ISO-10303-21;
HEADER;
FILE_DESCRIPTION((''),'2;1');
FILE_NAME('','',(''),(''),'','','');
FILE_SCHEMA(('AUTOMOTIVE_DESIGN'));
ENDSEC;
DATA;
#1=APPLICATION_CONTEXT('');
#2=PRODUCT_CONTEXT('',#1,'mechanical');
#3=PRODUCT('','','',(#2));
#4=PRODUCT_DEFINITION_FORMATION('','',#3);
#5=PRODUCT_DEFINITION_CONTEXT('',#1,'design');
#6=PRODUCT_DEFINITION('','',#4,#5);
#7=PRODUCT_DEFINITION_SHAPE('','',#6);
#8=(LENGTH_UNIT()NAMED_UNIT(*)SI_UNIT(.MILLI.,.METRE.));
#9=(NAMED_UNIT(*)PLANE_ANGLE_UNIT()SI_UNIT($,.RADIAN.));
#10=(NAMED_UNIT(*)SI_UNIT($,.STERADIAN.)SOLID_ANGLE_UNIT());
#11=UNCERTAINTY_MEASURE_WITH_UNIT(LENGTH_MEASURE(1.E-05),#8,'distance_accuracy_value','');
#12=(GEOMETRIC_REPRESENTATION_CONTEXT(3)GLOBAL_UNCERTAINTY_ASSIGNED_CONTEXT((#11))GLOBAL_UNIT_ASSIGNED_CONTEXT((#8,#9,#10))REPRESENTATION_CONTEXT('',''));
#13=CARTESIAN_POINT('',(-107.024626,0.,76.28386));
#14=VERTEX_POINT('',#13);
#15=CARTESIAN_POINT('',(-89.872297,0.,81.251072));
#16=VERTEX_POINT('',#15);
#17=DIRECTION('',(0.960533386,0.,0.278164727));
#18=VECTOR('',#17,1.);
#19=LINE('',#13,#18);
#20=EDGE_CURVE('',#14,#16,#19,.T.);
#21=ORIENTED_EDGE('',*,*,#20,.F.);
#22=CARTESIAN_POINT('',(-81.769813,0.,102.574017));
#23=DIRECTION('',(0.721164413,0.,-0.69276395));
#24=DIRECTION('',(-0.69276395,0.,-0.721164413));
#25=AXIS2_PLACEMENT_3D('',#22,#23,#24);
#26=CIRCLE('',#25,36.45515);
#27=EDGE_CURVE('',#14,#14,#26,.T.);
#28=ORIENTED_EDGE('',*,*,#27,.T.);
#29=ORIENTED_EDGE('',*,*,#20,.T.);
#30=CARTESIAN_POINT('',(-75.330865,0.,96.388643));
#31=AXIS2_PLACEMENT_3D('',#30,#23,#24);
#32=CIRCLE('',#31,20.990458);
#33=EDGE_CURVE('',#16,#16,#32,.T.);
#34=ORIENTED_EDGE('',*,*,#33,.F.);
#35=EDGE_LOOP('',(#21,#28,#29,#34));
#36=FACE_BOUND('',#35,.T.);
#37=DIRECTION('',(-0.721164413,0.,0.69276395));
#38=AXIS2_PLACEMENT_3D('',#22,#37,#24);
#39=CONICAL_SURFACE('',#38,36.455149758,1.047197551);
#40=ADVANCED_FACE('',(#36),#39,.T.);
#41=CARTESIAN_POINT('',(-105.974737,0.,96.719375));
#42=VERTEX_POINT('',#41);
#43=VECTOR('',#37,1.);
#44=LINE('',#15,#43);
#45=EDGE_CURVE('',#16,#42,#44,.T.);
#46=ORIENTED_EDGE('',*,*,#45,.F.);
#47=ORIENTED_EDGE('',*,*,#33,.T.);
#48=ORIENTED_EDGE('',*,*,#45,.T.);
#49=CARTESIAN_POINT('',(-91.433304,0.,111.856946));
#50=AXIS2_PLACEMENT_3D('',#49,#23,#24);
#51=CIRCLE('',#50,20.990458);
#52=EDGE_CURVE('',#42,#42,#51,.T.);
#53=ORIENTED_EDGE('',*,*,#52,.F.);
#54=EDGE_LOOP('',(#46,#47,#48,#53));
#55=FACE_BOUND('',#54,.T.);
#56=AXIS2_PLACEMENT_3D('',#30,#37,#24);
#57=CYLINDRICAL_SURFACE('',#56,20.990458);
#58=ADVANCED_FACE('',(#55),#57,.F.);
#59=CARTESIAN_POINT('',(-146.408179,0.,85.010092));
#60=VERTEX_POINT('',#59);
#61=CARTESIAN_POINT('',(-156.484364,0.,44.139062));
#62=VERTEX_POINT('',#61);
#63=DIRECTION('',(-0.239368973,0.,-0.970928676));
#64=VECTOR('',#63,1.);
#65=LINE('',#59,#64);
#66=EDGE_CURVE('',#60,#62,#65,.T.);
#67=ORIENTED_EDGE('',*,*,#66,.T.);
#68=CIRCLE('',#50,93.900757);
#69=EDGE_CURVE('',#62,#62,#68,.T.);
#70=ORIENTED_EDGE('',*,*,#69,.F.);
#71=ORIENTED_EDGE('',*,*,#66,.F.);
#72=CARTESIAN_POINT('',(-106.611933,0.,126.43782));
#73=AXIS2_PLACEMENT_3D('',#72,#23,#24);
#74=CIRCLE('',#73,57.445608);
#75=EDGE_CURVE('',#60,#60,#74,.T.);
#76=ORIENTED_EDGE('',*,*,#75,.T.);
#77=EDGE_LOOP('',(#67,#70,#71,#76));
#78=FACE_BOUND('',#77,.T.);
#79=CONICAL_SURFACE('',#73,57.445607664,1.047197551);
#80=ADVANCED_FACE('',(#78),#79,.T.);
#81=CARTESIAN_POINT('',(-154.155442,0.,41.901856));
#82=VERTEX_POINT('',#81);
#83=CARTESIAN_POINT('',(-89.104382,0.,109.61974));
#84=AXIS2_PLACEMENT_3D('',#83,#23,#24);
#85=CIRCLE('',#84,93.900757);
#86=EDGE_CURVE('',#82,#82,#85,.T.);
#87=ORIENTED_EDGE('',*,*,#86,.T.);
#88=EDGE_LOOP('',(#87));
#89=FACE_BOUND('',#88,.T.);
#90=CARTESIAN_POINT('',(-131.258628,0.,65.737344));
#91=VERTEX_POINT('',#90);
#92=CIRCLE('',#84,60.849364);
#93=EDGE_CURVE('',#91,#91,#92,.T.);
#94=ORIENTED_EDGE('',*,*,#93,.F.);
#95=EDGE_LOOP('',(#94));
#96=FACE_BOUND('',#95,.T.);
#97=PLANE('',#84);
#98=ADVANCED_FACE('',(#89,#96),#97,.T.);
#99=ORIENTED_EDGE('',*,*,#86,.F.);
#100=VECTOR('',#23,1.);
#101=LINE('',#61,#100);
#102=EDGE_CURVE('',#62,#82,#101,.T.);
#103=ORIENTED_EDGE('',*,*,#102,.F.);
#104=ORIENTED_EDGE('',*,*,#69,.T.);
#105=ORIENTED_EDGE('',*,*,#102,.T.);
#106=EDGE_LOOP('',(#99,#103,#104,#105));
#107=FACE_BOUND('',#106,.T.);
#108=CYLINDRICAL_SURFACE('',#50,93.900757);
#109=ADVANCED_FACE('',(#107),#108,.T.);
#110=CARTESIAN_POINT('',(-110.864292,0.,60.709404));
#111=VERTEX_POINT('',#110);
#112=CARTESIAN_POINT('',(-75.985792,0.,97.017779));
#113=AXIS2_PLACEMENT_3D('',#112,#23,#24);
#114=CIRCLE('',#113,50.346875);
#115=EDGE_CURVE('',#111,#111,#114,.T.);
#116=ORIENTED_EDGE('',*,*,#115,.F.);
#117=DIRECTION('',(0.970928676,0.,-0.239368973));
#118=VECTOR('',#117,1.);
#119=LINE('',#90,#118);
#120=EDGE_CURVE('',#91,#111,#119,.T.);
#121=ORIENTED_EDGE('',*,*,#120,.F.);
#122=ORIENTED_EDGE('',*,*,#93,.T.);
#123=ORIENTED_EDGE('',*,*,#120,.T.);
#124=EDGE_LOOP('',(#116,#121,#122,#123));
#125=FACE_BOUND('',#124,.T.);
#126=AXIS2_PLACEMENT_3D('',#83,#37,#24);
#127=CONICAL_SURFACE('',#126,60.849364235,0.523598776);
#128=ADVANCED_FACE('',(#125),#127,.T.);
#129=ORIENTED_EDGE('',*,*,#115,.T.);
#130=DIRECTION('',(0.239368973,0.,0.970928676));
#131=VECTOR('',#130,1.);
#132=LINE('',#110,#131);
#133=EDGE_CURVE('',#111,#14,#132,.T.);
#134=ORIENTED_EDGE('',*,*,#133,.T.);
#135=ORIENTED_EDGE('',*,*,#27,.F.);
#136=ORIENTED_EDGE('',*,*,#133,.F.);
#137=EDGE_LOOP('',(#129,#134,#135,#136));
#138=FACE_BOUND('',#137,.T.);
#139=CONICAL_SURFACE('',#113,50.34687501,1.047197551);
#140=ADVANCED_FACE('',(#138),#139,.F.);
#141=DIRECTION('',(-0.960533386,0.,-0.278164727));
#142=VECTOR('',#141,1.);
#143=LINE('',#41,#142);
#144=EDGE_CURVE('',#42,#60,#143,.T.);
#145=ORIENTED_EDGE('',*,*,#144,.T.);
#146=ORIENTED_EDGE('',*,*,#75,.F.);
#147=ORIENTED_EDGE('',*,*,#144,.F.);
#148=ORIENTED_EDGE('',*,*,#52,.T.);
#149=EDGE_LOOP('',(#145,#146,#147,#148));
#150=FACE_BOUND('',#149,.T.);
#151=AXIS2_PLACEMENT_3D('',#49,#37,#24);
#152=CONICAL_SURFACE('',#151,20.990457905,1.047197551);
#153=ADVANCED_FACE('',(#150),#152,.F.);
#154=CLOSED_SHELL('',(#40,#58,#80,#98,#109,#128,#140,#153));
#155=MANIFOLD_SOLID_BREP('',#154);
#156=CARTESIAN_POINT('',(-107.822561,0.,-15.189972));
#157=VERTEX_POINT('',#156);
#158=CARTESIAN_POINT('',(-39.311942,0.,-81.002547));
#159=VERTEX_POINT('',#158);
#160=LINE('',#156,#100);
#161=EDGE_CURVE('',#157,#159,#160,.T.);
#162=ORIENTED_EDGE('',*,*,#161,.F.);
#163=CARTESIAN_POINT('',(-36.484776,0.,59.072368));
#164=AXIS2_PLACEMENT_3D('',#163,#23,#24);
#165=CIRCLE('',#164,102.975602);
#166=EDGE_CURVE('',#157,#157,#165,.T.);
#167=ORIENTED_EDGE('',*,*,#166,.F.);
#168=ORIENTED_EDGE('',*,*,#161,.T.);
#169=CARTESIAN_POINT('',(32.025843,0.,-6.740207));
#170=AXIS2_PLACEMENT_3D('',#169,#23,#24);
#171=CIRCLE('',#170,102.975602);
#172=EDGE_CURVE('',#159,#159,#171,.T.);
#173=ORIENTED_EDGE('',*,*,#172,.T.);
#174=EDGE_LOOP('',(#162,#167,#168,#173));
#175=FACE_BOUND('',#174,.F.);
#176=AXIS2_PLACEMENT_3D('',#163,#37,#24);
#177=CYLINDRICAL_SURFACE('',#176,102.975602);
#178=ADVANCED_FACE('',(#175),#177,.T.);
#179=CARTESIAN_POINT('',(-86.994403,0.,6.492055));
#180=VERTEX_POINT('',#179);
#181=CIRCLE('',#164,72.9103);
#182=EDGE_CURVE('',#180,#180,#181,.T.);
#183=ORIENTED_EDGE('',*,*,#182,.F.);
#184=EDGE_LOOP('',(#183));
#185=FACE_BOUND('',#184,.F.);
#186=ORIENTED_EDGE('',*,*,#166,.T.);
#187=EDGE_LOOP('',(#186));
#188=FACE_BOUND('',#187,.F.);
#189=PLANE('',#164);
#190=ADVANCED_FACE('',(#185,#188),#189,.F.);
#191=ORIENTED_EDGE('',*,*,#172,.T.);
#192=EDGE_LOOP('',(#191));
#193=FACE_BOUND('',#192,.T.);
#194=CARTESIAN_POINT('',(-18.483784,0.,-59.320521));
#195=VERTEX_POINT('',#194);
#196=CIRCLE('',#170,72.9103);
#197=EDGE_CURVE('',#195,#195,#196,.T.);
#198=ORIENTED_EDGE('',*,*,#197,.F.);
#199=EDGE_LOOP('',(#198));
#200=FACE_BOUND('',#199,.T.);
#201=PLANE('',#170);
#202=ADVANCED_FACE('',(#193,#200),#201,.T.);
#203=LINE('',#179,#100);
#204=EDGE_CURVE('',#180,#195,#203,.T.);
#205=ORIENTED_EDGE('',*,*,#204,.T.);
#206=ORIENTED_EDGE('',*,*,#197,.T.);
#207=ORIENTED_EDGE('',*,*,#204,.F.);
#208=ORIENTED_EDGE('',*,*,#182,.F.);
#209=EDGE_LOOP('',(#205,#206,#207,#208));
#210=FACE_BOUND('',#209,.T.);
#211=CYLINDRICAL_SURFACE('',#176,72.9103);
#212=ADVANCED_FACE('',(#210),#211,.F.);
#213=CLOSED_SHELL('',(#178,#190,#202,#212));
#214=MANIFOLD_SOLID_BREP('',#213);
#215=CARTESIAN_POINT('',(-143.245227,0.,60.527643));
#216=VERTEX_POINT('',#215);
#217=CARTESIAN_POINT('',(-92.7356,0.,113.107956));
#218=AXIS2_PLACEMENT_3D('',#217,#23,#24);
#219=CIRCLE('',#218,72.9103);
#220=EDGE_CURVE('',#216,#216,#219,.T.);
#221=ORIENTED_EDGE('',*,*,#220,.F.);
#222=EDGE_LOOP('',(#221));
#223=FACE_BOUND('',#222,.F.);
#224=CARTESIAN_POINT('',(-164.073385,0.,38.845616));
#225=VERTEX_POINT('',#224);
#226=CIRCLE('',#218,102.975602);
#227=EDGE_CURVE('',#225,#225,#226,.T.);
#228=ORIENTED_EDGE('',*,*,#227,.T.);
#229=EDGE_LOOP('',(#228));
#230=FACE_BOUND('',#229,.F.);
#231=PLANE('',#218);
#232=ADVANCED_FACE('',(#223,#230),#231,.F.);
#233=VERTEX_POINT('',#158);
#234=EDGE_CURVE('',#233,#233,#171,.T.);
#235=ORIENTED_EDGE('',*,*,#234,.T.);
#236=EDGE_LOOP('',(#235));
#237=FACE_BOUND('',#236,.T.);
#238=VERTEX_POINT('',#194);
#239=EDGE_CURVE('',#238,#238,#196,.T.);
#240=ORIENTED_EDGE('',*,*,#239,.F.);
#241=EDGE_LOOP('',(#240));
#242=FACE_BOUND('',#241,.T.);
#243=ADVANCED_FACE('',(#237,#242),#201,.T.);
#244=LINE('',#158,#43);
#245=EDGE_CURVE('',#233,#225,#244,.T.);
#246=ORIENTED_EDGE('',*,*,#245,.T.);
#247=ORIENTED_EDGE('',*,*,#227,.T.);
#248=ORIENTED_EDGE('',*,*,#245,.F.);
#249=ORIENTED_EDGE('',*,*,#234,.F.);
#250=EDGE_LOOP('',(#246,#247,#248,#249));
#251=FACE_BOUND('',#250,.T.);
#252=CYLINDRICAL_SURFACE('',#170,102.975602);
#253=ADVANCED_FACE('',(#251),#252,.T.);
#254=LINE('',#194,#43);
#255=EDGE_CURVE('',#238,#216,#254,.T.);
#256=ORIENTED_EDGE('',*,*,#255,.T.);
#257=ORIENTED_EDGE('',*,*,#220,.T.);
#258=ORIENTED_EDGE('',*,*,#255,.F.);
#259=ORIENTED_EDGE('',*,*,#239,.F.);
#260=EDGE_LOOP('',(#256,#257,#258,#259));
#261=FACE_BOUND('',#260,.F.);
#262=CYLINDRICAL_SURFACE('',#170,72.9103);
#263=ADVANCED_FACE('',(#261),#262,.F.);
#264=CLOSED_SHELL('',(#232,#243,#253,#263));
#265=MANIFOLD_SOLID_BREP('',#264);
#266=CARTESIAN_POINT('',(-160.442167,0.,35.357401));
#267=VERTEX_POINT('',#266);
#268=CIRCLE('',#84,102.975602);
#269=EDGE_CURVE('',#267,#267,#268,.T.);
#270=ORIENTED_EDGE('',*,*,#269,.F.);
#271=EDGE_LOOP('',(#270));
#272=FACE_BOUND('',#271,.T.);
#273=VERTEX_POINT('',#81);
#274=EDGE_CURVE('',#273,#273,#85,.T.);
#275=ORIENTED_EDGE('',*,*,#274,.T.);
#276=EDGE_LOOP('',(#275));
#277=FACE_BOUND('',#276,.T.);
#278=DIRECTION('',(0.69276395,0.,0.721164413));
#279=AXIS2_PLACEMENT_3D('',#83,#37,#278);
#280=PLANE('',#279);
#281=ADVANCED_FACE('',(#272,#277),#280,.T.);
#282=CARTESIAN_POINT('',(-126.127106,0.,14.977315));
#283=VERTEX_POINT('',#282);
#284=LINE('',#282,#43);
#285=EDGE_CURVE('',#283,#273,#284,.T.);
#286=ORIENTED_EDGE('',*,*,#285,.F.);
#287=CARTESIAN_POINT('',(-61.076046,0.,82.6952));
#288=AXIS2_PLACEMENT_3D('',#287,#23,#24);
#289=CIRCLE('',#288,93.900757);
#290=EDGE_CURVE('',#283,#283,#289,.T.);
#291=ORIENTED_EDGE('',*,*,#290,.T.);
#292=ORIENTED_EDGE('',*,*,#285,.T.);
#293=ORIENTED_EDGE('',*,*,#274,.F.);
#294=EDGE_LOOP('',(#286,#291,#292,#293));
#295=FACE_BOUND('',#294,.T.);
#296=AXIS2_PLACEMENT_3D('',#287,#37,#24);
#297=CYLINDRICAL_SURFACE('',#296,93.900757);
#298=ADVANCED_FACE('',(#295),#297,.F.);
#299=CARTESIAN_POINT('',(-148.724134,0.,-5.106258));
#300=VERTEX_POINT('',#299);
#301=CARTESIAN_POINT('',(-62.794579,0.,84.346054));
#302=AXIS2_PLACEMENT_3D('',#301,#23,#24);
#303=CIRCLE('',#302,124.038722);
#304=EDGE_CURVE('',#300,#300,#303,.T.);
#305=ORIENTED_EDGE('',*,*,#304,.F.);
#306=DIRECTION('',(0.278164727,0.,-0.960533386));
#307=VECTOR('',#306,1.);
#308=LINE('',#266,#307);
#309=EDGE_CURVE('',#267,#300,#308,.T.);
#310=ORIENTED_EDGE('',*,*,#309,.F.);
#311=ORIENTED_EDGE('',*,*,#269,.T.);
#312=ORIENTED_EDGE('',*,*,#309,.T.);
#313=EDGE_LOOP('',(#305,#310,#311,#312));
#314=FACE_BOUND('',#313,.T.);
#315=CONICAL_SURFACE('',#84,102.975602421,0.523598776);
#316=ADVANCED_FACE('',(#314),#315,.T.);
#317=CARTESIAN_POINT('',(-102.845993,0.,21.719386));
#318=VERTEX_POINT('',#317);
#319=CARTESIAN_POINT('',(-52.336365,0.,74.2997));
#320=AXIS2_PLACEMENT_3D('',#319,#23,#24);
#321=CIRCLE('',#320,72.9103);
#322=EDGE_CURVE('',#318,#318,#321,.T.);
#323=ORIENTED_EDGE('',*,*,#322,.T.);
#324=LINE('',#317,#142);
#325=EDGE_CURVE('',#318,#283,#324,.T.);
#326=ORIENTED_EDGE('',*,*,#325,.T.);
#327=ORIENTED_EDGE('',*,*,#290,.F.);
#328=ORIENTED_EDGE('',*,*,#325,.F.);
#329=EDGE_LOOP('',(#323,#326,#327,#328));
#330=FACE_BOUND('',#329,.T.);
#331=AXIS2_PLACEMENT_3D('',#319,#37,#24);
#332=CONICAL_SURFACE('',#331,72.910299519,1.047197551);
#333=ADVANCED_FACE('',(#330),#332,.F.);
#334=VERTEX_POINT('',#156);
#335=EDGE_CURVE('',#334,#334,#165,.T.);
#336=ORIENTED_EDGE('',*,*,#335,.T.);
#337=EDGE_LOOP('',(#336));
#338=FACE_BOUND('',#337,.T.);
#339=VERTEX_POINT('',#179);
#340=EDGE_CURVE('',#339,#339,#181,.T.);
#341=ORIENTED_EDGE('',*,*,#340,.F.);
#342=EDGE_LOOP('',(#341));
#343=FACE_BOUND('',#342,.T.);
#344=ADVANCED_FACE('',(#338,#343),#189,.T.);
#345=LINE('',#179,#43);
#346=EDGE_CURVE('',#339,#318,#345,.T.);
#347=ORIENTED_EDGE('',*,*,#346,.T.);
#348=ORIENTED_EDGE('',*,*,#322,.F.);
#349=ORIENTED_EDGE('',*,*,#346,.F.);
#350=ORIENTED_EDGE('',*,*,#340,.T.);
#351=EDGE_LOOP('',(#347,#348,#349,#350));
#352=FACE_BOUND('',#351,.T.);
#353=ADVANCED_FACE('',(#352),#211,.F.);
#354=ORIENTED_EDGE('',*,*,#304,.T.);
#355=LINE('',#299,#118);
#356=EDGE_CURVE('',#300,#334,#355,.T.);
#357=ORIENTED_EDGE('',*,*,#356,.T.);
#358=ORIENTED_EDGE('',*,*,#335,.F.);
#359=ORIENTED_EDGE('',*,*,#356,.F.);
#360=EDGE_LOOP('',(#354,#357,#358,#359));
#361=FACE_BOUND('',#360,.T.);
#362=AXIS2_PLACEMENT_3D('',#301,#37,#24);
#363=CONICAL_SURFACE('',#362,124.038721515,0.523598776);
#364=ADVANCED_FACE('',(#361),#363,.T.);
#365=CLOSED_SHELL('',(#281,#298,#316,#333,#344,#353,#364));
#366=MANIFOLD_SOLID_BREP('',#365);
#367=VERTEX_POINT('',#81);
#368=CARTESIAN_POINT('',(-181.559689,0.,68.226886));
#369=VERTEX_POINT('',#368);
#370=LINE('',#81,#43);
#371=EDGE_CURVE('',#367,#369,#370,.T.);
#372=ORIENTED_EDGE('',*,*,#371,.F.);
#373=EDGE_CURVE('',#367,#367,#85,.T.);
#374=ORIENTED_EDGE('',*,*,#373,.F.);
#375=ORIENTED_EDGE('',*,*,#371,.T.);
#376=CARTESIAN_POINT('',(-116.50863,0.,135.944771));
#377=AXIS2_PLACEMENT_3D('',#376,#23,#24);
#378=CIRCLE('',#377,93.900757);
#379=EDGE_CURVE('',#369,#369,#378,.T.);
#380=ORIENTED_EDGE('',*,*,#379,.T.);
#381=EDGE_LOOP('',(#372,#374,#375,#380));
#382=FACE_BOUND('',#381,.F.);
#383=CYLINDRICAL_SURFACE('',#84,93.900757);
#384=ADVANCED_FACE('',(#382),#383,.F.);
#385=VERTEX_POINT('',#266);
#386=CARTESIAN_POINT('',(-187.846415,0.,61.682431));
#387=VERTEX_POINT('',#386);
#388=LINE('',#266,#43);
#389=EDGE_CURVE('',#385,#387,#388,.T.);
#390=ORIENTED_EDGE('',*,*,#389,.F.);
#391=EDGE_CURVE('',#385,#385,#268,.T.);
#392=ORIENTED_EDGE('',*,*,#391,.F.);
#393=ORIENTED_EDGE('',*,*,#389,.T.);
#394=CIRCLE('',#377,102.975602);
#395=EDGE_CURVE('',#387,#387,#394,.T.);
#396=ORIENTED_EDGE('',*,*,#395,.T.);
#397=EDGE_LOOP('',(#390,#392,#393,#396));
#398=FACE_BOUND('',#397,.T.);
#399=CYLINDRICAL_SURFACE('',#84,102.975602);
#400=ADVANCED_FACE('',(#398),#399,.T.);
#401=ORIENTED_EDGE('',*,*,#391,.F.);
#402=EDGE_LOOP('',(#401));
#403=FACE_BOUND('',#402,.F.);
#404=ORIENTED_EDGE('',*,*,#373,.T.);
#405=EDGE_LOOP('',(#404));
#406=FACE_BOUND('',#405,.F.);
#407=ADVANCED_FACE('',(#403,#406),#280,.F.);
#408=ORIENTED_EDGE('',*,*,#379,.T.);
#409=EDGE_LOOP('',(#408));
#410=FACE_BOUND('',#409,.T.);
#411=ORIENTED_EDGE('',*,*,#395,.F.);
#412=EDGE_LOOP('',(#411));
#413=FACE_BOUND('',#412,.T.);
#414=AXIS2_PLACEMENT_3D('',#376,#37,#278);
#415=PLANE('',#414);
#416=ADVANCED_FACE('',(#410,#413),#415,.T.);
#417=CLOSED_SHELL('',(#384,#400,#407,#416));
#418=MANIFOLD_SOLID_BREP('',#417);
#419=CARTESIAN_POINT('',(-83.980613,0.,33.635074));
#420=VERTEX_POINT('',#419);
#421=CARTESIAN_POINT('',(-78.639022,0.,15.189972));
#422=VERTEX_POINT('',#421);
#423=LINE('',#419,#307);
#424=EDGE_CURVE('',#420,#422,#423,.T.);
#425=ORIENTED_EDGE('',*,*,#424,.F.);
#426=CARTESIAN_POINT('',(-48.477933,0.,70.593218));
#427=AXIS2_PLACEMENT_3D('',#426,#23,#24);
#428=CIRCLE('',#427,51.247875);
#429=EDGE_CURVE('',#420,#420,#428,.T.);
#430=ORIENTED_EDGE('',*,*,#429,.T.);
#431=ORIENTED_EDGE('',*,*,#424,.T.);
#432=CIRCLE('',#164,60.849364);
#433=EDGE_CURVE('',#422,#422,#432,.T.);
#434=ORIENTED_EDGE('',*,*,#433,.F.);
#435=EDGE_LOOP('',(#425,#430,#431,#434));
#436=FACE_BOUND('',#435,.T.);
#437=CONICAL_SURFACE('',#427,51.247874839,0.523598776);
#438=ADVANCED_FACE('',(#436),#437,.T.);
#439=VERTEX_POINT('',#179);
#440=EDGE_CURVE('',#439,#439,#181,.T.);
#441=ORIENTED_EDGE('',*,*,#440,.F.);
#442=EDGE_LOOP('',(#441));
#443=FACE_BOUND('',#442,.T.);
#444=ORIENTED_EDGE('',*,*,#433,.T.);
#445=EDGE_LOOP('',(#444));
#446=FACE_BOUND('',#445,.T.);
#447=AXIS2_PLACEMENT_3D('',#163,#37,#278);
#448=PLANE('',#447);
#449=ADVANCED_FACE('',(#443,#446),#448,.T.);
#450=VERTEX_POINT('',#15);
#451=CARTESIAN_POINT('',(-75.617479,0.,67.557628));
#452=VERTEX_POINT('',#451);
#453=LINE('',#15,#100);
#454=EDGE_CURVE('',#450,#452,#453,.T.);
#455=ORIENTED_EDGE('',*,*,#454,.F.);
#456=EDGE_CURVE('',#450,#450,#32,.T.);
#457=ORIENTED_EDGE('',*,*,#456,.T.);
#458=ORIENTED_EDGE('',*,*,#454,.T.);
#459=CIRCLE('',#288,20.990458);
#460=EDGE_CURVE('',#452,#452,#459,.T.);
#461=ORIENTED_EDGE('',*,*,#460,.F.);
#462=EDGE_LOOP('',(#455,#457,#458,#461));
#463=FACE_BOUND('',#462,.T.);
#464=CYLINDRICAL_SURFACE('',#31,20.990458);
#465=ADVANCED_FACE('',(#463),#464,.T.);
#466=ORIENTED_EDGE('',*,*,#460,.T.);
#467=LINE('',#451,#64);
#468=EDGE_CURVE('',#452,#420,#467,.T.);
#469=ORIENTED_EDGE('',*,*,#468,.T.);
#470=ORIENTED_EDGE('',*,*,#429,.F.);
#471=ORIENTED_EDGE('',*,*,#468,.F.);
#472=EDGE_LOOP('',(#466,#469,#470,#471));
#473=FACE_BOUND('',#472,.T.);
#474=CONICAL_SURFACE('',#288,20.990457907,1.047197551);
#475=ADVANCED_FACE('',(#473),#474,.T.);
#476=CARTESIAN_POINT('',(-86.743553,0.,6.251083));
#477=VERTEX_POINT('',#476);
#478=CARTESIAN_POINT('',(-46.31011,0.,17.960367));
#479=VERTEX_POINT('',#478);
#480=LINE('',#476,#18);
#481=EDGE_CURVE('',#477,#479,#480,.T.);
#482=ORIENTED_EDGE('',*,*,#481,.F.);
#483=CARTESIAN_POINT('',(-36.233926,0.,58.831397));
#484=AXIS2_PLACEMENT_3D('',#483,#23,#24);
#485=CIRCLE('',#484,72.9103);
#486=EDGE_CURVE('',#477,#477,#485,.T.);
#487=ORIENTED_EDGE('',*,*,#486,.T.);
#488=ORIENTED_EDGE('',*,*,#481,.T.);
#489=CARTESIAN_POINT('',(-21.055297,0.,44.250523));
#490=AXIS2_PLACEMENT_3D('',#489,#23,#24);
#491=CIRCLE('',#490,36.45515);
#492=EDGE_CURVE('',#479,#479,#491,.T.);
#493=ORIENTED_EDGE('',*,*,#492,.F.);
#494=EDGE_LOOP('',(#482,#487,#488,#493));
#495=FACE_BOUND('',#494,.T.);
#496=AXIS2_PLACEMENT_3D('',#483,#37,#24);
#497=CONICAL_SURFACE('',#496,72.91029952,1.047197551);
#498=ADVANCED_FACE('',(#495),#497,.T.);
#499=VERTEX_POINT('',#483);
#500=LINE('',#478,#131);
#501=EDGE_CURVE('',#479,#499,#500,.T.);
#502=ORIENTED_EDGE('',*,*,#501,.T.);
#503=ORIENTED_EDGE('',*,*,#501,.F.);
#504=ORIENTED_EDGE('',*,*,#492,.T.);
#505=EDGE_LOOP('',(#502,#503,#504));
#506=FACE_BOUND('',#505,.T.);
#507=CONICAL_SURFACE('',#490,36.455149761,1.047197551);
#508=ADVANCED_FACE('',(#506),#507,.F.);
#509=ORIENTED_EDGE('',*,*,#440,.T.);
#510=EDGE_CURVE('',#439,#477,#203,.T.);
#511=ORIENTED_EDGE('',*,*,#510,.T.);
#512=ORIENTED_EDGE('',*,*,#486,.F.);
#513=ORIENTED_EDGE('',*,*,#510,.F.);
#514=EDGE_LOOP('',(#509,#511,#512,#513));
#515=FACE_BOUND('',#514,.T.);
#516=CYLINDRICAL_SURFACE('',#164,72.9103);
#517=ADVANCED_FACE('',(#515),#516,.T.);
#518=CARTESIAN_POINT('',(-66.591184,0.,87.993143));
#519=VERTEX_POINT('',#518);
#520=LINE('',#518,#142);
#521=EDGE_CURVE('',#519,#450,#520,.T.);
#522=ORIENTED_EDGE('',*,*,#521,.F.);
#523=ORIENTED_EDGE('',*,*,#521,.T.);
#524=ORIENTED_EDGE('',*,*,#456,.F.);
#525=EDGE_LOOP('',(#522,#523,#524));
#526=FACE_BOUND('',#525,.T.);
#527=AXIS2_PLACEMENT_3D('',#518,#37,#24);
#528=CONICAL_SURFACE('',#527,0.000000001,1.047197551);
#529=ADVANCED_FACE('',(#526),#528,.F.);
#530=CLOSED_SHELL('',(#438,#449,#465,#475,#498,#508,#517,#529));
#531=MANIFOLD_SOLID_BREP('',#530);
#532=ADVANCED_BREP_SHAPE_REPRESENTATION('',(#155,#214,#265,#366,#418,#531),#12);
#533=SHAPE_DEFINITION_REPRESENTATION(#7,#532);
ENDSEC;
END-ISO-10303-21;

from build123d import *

# Parameters (mm, degrees)
F2_DEPTH = 38
F3_DEPTH = 95
F4_DEPTH = 173


with BuildPart() as f1:
    # F0 (on Front) → F1 (revolve)
    with BuildSketch(Plane.XZ):
        Polygon((-107.8225609797, -15.1899719095), (-86.9944029931, 6.4920546009), (-102.8459925252, 21.7193863706), (-126.1271058847, 14.9773151046), (-154.155441743, 41.9018559024), (-160.4421672051, 35.3574006403), (-148.7241336666, -5.106257544), align=None)
    revolve(axis=Axis((-51.4125548803, 0, 73.4122700717), (0.7211644127, 0, -0.6927639496)))


with BuildPart() as f1b:
    # F0 (on Front) → F1, piece 2 (revolve)
    with BuildSketch(Plane.XZ):
        Polygon((-107.0246264672, 76.2838601884), (-89.8722972673, 81.2510721966), (-105.9747368764, 96.7193752164), (-146.4081794357, 85.0100919422), (-156.4843639398, 44.1390618864), (-154.155441743, 41.9018559024), (-131.2586280567, 65.7373444592), (-110.8642921288, 60.709404342), align=None)
    revolve(axis=Axis((-51.4125548803, 0, 73.4122700717), (0.7211644127, 0, -0.6927639496)))


with BuildPart() as f1c:
    # F0 (on Front) → F1, piece 3 (revolve)
    with BuildSketch(Plane.XZ):
        Polygon((-46.3101103569, 17.9603666249), (-36.2339258527, 58.8313966808), (-66.5911839079, 87.9931434625), (-89.8722972673, 81.2510721966), (-75.6174788212, 67.5576284346), (-83.9806131832, 33.6350741456), (-78.6390218312, 15.1899719095), (-86.9944029931, 6.4920546009), (-86.7435529162, 6.2510833508), align=None)
    revolve(axis=Axis((-51.4125548803, 0, 73.4122700717), (0.7211644127, 0, -0.6927639496)))


with BuildPart() as f2:
    # F2 (new): a face of the model
    f2_faces = [f1.part.faces().sort_by_distance(p)[0] for p in [
        (-22.0355853047, 0, 179.4380812225),
    ]]
    extrude(f2_faces, amount=F2_DEPTH)


with BuildPart() as f3:
    # F3 (new): a face of the model
    f3_faces = [f1.part.faces().sort_by_distance(p)[0] for p in [
        (32.8352718578, 0, 131.2342516077),
    ]]
    extrude(f3_faces, amount=F3_DEPTH)


with BuildPart() as f4:
    # F4 (new): a face of the model
    f4_faces = [f3.part.faces().sort_by_distance(p)[0] for p in [
        (101.345891061, 0, 65.421676393),
    ]]
    extrude(f4_faces, amount=-F4_DEPTH)


solid = Compound([f1.part, f1b.part, f1c.part, f2.part, f3.part, f4.part])
